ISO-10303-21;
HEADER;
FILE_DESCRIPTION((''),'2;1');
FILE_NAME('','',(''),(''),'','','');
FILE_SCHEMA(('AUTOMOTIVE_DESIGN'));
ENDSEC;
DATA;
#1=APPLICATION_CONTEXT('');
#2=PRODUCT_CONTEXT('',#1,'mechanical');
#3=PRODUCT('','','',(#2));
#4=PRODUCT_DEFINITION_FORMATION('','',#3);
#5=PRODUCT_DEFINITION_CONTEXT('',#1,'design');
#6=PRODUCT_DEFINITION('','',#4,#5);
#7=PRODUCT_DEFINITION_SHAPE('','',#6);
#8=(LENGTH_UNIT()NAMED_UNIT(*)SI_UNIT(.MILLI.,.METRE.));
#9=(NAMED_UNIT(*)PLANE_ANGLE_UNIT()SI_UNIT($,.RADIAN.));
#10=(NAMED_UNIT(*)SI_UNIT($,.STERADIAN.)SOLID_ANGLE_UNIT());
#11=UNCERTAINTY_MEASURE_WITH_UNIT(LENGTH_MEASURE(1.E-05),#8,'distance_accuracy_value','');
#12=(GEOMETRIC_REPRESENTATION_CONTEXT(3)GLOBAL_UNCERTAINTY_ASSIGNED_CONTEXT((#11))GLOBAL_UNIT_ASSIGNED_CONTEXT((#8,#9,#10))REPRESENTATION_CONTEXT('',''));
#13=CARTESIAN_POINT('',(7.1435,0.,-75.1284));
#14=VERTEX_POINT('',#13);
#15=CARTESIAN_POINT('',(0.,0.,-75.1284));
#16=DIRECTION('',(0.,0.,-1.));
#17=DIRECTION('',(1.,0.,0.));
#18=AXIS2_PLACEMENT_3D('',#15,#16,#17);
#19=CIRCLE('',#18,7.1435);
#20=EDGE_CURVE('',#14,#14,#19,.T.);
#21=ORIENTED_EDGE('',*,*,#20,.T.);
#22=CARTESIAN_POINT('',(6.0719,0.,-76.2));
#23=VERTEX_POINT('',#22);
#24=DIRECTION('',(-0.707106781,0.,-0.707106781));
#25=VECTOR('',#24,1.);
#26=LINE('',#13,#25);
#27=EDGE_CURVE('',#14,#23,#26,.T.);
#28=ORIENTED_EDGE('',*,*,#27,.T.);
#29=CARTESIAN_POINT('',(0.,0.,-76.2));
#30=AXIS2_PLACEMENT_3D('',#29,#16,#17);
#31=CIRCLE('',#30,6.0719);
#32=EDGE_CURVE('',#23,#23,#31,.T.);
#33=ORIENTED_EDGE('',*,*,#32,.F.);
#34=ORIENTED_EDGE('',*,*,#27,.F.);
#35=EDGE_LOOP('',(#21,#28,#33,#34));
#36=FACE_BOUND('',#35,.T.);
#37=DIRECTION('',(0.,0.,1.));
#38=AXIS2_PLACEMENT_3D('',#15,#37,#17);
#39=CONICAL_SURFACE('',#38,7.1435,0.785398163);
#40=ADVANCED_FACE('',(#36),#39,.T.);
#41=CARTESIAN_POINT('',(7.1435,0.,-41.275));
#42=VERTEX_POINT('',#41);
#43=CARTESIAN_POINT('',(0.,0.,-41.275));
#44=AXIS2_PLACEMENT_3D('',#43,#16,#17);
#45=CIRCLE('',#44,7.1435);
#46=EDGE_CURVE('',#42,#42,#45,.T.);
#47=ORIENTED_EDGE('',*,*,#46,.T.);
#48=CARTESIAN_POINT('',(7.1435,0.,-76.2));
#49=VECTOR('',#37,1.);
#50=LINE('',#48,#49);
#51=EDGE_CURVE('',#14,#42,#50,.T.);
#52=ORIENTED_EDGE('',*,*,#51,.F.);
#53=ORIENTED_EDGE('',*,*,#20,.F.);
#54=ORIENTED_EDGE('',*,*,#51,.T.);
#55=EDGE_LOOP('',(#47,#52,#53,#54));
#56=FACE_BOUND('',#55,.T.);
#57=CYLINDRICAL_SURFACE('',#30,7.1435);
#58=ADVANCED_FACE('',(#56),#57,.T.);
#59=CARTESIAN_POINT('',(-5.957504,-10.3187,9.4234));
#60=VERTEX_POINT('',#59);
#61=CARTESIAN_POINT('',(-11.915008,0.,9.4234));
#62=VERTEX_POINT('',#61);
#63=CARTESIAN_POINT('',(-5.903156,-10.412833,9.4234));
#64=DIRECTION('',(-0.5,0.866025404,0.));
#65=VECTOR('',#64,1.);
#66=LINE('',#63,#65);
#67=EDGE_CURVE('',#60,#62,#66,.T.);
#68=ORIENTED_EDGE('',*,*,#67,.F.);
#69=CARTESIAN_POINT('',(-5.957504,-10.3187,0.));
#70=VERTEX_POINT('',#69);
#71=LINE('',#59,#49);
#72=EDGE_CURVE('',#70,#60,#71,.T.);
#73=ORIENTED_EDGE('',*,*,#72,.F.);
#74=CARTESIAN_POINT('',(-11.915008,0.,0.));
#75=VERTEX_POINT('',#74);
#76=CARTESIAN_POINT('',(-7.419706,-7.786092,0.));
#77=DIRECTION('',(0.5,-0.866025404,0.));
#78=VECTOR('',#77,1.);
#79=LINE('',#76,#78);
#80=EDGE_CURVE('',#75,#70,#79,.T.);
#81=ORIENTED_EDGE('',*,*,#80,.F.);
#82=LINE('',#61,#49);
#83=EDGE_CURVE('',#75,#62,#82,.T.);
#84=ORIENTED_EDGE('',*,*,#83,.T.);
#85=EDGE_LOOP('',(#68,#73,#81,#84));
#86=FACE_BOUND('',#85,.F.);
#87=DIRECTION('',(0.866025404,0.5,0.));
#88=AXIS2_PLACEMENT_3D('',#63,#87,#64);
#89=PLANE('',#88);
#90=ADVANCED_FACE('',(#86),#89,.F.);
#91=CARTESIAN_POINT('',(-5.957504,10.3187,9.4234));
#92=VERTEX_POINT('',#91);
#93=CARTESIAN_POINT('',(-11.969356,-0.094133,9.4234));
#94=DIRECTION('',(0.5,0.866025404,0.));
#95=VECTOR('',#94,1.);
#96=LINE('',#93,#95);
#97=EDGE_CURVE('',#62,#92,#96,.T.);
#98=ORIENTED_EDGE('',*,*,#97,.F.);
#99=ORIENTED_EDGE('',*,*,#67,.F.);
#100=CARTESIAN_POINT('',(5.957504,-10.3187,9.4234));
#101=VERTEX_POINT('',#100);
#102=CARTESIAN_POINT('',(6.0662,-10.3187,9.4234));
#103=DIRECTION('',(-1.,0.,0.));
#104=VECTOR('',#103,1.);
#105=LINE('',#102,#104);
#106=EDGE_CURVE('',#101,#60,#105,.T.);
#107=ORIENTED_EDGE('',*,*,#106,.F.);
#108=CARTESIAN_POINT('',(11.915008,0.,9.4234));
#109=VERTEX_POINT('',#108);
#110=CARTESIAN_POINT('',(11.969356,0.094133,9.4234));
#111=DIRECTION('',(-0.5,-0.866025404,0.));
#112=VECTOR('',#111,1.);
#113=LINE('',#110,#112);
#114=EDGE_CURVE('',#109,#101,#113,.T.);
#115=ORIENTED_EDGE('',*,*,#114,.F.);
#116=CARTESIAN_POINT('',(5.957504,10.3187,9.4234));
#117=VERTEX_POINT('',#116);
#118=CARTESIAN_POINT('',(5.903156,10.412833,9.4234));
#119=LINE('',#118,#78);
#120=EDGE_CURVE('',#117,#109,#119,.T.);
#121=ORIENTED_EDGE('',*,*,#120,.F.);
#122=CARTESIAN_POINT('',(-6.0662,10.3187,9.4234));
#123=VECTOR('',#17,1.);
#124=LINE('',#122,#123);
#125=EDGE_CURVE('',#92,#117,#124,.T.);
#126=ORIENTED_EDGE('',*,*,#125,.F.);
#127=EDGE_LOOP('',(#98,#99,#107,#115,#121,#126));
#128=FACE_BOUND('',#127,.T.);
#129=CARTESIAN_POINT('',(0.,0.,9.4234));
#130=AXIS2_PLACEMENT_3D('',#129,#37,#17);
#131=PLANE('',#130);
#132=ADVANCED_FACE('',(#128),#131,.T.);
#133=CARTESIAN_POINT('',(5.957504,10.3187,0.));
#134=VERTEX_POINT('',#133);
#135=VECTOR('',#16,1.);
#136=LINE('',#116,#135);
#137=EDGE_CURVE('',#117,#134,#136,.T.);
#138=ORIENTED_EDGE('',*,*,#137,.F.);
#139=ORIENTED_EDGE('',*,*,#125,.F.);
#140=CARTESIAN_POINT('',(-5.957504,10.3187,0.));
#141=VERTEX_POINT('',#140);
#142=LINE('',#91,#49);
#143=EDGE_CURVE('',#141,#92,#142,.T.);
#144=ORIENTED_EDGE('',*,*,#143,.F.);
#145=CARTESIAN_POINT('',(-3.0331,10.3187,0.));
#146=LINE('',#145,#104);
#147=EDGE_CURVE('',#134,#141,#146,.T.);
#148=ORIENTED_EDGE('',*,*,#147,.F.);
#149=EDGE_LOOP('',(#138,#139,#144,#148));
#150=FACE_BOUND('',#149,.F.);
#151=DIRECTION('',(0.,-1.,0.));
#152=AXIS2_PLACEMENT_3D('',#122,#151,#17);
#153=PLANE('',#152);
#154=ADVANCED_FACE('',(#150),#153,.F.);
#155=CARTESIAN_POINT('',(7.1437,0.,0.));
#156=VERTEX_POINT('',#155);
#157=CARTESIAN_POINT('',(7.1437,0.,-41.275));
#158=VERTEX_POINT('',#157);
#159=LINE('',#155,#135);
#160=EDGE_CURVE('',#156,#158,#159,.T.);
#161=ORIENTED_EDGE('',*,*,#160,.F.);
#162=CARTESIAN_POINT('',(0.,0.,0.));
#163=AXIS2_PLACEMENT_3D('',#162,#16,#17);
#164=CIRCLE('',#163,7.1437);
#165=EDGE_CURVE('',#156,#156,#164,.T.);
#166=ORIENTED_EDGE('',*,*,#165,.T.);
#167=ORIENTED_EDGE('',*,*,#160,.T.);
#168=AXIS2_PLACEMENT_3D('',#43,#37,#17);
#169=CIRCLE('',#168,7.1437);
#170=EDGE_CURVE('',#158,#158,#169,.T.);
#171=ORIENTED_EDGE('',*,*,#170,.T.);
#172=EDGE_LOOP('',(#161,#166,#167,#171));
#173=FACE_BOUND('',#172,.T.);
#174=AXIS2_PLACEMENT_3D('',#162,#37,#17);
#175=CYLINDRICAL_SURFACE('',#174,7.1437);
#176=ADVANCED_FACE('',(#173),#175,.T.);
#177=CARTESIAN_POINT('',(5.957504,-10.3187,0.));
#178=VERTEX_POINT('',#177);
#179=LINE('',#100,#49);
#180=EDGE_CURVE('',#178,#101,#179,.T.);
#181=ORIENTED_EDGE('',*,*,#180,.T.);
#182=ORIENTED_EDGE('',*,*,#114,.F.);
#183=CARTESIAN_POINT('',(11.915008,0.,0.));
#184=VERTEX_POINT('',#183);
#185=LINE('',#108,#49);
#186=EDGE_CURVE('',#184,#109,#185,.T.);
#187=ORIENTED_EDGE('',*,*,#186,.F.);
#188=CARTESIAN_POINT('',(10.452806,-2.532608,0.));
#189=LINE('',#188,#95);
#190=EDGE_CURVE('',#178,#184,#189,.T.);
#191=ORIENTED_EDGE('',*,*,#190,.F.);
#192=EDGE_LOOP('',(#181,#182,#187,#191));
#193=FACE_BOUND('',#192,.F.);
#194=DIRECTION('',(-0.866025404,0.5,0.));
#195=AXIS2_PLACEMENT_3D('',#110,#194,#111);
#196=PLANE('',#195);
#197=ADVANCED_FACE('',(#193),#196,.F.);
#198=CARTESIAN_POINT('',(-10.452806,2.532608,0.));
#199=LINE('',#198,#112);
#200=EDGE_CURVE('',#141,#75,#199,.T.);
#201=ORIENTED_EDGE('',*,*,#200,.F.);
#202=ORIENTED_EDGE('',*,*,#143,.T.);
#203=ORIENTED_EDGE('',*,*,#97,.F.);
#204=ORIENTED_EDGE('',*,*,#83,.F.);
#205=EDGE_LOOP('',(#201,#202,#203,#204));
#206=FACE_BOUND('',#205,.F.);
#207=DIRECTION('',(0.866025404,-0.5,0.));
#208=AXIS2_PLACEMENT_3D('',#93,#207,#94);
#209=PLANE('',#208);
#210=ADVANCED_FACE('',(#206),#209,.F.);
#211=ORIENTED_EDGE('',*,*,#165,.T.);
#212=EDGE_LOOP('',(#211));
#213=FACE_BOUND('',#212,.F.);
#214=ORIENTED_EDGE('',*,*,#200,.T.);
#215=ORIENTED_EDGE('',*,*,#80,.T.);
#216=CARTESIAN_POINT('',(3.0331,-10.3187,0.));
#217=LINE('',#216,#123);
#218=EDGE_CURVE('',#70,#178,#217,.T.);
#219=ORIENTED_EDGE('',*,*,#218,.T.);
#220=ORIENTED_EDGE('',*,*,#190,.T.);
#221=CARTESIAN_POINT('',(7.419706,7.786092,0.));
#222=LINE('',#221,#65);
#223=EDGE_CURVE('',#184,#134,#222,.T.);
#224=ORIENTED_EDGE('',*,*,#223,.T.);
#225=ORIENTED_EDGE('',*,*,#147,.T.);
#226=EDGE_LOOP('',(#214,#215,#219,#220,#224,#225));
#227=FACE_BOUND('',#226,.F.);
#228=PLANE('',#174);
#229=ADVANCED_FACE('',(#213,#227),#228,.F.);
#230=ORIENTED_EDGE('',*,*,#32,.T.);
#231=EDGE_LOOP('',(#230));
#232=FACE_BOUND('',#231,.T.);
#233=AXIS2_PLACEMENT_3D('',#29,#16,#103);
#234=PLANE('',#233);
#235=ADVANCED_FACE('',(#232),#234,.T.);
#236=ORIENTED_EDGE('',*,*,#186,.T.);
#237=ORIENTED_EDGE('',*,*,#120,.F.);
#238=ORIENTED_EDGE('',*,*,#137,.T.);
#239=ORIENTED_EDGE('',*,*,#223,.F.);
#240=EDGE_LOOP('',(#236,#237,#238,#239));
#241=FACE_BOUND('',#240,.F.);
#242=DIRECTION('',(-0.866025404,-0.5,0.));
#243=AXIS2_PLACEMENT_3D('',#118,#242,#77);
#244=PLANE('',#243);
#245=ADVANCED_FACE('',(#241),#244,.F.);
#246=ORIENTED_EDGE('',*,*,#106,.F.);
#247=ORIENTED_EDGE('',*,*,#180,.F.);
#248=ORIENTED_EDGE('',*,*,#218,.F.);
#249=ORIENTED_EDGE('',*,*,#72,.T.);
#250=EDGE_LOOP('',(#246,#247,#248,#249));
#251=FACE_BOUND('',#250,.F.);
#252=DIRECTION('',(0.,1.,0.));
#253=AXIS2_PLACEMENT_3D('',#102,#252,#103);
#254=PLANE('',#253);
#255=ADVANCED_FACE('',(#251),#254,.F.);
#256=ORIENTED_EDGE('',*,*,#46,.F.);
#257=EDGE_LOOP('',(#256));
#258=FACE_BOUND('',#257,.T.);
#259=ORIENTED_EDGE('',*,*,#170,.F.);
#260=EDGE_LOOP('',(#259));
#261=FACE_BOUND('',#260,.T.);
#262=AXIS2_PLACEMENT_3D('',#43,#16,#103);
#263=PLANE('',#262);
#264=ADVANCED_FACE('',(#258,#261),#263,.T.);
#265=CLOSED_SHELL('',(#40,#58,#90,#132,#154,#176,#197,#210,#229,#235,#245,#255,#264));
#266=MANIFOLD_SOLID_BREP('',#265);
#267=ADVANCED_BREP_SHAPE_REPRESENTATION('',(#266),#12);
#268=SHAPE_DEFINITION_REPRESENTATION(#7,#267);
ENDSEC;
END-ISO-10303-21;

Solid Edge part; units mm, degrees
sketch "Sketch1" plane through (0, 0, 0) normal (0, 0, 1) x (1, 0, 0)
  circle A0 centre (0, 0) radius 11.9697
  dimension "D1" = 23.9395
extrude "Protrusion1" add sketch "Sketch1" along normal blind 9.4234
sketch "Sketch2" plane through (0, 0, 0) normal (0, 0, -1) x (1, 0, 0)
  circle A0 centre (0, 0) radius 7.1437
extrude "Protrusion2" add sketch "Sketch2" along normal blind 76.2
sketch "Sketch3" plane through (0, 0, -76.2) normal (0, 0, -1) x (1, 0, 0)
  circle A0 centre (0, 0) radius 7.1435
extrude "Cutout1" cut sketch "Sketch3" against normal blind 34.925 flip side to cut
chamfer "Chamfer_1" distance 1.0716 angle 45 1 edges at (-7.1435, 0, -76.2)
sketch "Sketch4" plane through (0, 0, 9.4234) normal (0, 0, 1) x (1, 0, 0)
  line L0 (-6.0662, 10.3187) -> (6.0662, 10.3187)
  dimension "D1" = 20.6375
extrude "Cutout2" cut sketch "Sketch4" against normal up to next material side at (0, 10.3687, 9.4234)
pattern_circular "Pattern1" count 6 over 360 about axis through (0, 0, 9.4234) along (0, 0, 1) of "Cutout2"
properties part number "24101174"
